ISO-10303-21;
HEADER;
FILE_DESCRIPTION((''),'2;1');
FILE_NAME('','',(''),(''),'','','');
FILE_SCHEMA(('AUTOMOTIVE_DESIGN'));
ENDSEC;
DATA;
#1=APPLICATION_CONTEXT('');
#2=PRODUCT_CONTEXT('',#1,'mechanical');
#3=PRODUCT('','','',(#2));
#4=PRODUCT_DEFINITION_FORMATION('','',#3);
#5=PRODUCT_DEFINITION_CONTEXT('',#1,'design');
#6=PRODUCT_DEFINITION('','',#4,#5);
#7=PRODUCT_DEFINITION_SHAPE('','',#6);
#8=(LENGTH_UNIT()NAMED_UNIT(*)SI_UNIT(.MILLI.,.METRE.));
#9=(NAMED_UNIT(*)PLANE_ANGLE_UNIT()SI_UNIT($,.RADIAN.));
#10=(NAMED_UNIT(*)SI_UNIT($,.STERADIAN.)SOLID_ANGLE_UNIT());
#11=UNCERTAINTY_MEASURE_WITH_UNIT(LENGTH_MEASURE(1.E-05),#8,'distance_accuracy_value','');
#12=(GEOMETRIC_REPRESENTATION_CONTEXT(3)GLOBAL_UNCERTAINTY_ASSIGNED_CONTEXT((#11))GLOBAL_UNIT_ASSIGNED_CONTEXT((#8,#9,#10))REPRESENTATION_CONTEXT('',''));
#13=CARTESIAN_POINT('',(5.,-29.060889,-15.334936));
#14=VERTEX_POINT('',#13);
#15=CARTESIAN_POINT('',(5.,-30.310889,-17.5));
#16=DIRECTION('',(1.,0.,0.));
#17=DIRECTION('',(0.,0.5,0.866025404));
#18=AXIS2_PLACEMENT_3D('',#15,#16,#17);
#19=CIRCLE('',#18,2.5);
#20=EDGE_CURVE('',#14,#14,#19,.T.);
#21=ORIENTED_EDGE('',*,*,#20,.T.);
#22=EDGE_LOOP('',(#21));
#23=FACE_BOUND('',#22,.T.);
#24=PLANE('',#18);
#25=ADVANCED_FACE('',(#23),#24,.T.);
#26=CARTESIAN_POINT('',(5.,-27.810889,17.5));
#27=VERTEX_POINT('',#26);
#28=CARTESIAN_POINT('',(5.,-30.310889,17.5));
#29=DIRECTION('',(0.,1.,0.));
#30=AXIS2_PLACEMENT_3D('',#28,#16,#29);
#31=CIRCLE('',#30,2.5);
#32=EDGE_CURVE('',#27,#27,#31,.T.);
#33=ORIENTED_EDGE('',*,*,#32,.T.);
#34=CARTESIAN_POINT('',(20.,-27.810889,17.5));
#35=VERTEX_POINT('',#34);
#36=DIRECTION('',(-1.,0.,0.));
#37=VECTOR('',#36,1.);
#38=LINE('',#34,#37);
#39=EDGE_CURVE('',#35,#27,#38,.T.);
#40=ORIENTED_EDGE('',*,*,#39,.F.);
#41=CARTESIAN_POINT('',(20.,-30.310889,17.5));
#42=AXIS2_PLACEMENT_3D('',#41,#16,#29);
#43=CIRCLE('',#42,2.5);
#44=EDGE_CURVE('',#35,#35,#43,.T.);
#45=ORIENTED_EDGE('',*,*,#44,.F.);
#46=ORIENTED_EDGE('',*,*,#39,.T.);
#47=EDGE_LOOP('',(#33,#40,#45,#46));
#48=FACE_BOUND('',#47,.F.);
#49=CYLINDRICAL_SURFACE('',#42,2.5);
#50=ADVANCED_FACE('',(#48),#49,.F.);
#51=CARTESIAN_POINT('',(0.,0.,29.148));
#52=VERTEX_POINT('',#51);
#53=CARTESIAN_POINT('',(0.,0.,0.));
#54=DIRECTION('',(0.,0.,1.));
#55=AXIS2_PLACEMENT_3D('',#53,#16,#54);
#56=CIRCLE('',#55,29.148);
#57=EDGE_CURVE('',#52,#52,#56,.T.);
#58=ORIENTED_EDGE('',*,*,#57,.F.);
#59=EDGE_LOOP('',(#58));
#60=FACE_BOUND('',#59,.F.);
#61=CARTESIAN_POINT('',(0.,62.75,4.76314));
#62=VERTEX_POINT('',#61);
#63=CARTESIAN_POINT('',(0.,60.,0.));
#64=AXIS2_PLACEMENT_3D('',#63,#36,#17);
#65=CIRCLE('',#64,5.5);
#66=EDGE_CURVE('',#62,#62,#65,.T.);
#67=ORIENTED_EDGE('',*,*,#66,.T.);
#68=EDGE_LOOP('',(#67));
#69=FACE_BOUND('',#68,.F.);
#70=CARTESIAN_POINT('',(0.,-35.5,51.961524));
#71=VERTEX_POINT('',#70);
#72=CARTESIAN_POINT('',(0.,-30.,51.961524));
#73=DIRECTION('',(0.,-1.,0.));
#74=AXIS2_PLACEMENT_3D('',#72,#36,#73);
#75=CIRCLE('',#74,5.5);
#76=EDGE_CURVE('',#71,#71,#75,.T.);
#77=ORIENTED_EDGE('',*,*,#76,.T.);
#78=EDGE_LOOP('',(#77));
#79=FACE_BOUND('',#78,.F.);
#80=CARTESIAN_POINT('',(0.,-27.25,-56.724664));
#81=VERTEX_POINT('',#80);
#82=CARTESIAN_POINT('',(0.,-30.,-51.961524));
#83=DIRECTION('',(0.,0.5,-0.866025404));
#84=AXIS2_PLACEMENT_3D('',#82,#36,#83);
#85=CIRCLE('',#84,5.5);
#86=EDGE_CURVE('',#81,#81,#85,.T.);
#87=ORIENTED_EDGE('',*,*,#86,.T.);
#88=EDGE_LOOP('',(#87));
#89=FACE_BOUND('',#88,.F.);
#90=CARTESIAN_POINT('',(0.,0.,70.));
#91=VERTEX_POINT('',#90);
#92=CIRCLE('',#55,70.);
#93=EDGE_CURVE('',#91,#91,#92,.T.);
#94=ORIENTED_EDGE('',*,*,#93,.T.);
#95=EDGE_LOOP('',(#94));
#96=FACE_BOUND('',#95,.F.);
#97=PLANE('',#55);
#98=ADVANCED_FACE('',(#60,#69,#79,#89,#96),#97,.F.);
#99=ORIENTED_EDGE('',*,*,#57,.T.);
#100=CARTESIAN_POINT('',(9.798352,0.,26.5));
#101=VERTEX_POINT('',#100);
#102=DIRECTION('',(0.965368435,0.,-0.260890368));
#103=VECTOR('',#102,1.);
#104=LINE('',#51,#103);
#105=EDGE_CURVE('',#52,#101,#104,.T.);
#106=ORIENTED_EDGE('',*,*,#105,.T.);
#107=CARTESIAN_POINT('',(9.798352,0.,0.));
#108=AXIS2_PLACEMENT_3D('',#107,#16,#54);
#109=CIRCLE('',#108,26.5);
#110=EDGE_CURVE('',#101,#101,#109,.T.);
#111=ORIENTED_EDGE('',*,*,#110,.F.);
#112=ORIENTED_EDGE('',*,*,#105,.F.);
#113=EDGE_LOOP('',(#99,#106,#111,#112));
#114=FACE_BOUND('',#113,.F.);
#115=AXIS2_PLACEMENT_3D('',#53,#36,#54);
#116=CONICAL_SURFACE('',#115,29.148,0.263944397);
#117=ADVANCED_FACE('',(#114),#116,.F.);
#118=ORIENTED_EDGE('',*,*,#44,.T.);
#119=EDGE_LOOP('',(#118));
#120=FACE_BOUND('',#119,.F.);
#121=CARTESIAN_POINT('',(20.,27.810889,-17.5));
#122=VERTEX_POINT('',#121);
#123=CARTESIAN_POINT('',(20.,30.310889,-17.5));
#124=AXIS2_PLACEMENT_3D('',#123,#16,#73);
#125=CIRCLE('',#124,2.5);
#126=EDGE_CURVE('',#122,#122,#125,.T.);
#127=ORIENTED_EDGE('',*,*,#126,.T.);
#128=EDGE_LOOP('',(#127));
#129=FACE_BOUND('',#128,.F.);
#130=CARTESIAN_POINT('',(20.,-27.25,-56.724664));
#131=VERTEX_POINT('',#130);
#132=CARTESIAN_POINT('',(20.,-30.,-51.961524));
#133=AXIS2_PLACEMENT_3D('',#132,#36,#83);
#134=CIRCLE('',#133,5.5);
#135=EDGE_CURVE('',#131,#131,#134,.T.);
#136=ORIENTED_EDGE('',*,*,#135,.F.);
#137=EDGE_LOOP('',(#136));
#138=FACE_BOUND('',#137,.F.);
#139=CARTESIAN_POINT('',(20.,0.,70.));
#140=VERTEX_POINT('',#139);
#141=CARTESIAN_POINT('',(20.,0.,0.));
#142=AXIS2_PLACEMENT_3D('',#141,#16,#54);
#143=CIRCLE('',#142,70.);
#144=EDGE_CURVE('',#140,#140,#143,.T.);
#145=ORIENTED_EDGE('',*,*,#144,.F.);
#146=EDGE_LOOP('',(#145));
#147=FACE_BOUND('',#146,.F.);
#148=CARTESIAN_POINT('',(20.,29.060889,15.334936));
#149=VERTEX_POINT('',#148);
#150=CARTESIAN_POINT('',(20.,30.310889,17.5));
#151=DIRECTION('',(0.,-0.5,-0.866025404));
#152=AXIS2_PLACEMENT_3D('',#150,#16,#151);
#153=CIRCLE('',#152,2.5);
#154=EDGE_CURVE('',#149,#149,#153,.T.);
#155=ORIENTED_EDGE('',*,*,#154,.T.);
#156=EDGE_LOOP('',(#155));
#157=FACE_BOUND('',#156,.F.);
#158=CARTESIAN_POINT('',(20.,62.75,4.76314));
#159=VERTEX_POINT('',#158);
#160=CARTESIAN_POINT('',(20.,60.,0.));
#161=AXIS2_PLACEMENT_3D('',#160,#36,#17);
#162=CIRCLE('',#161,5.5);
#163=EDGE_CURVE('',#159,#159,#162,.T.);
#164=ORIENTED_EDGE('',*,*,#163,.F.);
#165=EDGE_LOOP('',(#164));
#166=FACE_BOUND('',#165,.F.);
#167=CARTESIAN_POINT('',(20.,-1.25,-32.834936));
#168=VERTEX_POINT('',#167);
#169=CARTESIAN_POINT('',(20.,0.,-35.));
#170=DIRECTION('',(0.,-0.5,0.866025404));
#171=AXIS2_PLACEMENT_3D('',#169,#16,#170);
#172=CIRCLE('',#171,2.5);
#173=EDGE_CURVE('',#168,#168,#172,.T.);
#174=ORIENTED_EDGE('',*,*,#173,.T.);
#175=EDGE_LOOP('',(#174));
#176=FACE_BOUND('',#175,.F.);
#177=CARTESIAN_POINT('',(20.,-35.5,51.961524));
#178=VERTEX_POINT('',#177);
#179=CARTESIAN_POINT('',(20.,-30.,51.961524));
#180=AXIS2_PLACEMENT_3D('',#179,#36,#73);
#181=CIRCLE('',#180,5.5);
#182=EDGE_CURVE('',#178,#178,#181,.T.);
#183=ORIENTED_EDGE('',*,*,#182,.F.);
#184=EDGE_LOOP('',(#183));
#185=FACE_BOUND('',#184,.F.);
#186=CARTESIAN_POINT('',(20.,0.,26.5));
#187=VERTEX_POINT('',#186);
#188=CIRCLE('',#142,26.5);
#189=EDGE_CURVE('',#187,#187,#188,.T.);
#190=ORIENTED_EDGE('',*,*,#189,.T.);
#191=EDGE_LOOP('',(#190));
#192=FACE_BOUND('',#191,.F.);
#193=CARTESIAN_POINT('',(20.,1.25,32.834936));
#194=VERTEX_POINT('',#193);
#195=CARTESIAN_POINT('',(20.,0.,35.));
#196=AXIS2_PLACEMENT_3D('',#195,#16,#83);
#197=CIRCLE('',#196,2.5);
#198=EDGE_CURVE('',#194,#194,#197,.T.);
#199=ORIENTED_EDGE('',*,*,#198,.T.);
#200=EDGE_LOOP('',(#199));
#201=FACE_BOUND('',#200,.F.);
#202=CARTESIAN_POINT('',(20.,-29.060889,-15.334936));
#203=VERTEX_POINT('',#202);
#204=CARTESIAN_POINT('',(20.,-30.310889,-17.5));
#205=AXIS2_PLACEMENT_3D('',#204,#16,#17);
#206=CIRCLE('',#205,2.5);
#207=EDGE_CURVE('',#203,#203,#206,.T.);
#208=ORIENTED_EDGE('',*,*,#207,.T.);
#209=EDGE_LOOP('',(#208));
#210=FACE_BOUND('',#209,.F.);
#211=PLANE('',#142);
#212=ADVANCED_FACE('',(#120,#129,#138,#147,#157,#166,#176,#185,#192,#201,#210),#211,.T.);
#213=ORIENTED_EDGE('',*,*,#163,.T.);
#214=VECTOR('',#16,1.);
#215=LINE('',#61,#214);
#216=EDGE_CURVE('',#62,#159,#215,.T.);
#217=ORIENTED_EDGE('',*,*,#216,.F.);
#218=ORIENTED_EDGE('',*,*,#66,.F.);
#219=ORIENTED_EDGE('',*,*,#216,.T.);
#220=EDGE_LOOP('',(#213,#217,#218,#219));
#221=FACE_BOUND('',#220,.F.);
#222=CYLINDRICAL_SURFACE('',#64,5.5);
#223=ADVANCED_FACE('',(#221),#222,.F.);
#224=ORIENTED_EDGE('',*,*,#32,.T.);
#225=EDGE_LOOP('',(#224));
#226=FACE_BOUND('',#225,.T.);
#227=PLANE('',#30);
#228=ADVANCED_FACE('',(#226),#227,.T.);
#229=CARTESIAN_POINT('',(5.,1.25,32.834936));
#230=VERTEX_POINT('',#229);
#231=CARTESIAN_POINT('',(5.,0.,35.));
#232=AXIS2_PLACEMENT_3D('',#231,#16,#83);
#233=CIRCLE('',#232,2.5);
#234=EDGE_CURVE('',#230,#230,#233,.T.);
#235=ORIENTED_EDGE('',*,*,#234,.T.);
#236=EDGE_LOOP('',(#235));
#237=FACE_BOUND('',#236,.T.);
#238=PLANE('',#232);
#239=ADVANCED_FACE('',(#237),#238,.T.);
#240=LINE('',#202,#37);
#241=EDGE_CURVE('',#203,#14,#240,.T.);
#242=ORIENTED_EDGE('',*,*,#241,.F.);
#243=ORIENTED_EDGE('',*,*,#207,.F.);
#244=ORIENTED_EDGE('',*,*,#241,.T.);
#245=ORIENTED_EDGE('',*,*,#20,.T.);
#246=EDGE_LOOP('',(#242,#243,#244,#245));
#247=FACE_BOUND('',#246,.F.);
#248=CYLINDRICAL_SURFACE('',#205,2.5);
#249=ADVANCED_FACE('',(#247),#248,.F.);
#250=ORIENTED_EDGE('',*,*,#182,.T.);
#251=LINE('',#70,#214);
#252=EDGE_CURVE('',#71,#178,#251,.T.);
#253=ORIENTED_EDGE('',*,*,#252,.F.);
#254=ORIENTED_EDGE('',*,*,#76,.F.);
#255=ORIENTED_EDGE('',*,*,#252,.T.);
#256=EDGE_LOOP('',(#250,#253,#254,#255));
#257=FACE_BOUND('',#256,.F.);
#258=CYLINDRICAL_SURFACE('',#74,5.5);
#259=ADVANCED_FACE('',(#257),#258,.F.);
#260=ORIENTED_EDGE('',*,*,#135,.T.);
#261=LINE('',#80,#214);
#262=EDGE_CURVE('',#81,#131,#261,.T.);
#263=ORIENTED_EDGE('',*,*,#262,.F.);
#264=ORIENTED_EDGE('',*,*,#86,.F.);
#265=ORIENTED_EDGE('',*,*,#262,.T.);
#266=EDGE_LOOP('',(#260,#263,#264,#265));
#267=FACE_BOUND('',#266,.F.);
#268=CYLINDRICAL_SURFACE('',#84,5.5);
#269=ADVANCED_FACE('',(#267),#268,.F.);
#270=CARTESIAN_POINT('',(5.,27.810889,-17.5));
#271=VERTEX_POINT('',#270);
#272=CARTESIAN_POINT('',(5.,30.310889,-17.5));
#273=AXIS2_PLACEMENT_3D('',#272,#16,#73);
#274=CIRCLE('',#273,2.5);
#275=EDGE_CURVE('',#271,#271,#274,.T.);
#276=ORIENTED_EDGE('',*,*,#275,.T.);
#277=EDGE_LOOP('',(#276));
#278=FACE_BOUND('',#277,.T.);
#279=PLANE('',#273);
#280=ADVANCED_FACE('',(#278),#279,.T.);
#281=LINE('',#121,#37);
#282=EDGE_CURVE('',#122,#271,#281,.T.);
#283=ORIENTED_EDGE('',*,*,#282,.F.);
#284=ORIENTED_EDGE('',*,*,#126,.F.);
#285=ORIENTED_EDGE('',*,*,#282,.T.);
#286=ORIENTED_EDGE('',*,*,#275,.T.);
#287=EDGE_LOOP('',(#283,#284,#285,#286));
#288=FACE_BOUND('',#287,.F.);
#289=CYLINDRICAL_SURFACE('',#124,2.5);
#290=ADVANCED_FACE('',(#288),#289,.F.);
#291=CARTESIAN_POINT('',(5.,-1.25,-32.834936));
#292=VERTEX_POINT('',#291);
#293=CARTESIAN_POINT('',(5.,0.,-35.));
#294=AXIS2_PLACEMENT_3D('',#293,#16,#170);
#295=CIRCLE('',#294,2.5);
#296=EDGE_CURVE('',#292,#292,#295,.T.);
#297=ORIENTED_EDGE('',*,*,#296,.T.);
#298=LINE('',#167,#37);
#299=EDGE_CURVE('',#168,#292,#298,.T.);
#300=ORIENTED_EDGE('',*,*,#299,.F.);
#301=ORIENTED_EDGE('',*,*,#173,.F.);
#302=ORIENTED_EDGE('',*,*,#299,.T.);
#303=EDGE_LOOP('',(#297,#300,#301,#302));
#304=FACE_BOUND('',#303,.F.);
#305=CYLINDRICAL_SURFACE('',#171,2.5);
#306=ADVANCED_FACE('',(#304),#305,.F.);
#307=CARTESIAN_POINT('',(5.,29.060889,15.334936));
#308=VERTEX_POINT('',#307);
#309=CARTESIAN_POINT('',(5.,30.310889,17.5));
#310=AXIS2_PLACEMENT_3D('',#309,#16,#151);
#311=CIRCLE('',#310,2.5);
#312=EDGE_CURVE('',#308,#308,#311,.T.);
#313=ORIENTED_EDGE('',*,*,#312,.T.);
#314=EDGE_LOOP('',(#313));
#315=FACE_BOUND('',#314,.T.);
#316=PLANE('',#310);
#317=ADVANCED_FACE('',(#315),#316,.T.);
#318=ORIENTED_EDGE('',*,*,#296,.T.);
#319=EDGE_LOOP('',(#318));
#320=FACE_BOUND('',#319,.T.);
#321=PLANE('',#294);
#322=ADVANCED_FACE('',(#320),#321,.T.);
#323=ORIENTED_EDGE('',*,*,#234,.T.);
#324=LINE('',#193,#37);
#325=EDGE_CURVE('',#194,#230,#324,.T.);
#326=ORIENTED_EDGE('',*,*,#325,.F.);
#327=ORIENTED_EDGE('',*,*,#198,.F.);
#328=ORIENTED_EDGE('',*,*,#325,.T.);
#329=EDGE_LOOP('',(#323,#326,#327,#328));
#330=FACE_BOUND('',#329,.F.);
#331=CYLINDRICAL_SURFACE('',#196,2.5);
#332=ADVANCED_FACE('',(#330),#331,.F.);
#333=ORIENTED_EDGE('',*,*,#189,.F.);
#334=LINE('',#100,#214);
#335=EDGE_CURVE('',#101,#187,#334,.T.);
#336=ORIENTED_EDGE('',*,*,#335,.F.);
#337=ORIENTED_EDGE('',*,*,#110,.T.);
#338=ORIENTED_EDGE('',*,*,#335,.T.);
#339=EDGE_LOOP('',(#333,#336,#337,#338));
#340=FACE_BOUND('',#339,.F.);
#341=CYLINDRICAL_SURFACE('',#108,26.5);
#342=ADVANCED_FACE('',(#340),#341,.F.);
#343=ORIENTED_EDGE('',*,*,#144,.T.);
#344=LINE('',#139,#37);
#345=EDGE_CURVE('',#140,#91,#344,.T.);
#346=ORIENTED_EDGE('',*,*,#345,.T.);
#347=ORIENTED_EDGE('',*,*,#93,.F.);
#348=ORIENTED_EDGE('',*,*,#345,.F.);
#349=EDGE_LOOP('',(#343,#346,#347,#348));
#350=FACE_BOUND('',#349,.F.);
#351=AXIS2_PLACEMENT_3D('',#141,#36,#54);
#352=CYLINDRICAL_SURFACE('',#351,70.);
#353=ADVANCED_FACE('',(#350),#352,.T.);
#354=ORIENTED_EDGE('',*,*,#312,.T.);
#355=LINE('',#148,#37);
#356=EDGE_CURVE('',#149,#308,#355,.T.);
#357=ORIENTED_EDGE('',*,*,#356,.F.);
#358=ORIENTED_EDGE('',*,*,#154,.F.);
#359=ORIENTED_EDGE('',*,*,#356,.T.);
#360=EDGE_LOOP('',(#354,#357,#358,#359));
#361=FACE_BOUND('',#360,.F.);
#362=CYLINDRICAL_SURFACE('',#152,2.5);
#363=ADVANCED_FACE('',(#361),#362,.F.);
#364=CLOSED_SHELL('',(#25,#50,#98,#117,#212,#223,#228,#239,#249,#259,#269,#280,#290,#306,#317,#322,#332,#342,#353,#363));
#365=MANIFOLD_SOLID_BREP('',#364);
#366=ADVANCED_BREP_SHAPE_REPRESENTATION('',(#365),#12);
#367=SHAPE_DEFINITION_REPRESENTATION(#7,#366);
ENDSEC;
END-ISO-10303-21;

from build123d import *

# Parameters (mm, degrees)
F2_R            = 5.5
F3_DEPTH        = 20.001
F3_COPIES_COUNT = 3
F4_R            = 2.5
F5_DEPTH        = 15
F5_COPIES_COUNT = 6


# Not quite as in the source:
# - a pattern or mirror of a feature is missing from the dataset's text; its kind, count and spacing are read off the source's solid


with BuildPart() as f1:
    # F0 (on Front) → F1 (revolve)
    with BuildSketch(Plane.XZ):
        Polygon((0, 70), (0, 29.148), (9.798351825, 26.5), (20, 26.5), (20, 70), align=None)
    revolve(axis=Axis((21.5308236951, 0, 0), (1, 0, 0)))

    # F2 (on face) → F3 (cut, through all)
    with BuildSketch(Plane(origin=(0, 0, 0), x_dir=(0, -1, 0), z_dir=(-1, 0, 0))):
        with Locations((30, 51.9615242271)):
            Circle(F2_R)
    f3 = extrude(amount=-F3_DEPTH, mode=Mode.SUBTRACT)

    # F3_copies: F3 ×3 about axis
    f3_copies_axis = Axis((0, 0, 0), (1, 0, 0))
    for i in range(1, F3_COPIES_COUNT):
        add(f3.rotate(f3_copies_axis, i * 360 / F3_COPIES_COUNT), mode=Mode.SUBTRACT)

    # F4 (on face) → F5 (cut)
    with BuildSketch(Plane.YZ.offset(20)):
        with Locations((-30.3108891325, 17.5)):
            Circle(F4_R)
    f5 = extrude(amount=-F5_DEPTH, mode=Mode.SUBTRACT)

    # F5_copies: F5 ×6 about axis
    f5_copies_axis = Axis((0, 0, 0), (1, 0, 0))
    for i in range(1, F5_COPIES_COUNT):
        add(f5.rotate(f5_copies_axis, i * 360 / F5_COPIES_COUNT), mode=Mode.SUBTRACT)


solid = f1.part
